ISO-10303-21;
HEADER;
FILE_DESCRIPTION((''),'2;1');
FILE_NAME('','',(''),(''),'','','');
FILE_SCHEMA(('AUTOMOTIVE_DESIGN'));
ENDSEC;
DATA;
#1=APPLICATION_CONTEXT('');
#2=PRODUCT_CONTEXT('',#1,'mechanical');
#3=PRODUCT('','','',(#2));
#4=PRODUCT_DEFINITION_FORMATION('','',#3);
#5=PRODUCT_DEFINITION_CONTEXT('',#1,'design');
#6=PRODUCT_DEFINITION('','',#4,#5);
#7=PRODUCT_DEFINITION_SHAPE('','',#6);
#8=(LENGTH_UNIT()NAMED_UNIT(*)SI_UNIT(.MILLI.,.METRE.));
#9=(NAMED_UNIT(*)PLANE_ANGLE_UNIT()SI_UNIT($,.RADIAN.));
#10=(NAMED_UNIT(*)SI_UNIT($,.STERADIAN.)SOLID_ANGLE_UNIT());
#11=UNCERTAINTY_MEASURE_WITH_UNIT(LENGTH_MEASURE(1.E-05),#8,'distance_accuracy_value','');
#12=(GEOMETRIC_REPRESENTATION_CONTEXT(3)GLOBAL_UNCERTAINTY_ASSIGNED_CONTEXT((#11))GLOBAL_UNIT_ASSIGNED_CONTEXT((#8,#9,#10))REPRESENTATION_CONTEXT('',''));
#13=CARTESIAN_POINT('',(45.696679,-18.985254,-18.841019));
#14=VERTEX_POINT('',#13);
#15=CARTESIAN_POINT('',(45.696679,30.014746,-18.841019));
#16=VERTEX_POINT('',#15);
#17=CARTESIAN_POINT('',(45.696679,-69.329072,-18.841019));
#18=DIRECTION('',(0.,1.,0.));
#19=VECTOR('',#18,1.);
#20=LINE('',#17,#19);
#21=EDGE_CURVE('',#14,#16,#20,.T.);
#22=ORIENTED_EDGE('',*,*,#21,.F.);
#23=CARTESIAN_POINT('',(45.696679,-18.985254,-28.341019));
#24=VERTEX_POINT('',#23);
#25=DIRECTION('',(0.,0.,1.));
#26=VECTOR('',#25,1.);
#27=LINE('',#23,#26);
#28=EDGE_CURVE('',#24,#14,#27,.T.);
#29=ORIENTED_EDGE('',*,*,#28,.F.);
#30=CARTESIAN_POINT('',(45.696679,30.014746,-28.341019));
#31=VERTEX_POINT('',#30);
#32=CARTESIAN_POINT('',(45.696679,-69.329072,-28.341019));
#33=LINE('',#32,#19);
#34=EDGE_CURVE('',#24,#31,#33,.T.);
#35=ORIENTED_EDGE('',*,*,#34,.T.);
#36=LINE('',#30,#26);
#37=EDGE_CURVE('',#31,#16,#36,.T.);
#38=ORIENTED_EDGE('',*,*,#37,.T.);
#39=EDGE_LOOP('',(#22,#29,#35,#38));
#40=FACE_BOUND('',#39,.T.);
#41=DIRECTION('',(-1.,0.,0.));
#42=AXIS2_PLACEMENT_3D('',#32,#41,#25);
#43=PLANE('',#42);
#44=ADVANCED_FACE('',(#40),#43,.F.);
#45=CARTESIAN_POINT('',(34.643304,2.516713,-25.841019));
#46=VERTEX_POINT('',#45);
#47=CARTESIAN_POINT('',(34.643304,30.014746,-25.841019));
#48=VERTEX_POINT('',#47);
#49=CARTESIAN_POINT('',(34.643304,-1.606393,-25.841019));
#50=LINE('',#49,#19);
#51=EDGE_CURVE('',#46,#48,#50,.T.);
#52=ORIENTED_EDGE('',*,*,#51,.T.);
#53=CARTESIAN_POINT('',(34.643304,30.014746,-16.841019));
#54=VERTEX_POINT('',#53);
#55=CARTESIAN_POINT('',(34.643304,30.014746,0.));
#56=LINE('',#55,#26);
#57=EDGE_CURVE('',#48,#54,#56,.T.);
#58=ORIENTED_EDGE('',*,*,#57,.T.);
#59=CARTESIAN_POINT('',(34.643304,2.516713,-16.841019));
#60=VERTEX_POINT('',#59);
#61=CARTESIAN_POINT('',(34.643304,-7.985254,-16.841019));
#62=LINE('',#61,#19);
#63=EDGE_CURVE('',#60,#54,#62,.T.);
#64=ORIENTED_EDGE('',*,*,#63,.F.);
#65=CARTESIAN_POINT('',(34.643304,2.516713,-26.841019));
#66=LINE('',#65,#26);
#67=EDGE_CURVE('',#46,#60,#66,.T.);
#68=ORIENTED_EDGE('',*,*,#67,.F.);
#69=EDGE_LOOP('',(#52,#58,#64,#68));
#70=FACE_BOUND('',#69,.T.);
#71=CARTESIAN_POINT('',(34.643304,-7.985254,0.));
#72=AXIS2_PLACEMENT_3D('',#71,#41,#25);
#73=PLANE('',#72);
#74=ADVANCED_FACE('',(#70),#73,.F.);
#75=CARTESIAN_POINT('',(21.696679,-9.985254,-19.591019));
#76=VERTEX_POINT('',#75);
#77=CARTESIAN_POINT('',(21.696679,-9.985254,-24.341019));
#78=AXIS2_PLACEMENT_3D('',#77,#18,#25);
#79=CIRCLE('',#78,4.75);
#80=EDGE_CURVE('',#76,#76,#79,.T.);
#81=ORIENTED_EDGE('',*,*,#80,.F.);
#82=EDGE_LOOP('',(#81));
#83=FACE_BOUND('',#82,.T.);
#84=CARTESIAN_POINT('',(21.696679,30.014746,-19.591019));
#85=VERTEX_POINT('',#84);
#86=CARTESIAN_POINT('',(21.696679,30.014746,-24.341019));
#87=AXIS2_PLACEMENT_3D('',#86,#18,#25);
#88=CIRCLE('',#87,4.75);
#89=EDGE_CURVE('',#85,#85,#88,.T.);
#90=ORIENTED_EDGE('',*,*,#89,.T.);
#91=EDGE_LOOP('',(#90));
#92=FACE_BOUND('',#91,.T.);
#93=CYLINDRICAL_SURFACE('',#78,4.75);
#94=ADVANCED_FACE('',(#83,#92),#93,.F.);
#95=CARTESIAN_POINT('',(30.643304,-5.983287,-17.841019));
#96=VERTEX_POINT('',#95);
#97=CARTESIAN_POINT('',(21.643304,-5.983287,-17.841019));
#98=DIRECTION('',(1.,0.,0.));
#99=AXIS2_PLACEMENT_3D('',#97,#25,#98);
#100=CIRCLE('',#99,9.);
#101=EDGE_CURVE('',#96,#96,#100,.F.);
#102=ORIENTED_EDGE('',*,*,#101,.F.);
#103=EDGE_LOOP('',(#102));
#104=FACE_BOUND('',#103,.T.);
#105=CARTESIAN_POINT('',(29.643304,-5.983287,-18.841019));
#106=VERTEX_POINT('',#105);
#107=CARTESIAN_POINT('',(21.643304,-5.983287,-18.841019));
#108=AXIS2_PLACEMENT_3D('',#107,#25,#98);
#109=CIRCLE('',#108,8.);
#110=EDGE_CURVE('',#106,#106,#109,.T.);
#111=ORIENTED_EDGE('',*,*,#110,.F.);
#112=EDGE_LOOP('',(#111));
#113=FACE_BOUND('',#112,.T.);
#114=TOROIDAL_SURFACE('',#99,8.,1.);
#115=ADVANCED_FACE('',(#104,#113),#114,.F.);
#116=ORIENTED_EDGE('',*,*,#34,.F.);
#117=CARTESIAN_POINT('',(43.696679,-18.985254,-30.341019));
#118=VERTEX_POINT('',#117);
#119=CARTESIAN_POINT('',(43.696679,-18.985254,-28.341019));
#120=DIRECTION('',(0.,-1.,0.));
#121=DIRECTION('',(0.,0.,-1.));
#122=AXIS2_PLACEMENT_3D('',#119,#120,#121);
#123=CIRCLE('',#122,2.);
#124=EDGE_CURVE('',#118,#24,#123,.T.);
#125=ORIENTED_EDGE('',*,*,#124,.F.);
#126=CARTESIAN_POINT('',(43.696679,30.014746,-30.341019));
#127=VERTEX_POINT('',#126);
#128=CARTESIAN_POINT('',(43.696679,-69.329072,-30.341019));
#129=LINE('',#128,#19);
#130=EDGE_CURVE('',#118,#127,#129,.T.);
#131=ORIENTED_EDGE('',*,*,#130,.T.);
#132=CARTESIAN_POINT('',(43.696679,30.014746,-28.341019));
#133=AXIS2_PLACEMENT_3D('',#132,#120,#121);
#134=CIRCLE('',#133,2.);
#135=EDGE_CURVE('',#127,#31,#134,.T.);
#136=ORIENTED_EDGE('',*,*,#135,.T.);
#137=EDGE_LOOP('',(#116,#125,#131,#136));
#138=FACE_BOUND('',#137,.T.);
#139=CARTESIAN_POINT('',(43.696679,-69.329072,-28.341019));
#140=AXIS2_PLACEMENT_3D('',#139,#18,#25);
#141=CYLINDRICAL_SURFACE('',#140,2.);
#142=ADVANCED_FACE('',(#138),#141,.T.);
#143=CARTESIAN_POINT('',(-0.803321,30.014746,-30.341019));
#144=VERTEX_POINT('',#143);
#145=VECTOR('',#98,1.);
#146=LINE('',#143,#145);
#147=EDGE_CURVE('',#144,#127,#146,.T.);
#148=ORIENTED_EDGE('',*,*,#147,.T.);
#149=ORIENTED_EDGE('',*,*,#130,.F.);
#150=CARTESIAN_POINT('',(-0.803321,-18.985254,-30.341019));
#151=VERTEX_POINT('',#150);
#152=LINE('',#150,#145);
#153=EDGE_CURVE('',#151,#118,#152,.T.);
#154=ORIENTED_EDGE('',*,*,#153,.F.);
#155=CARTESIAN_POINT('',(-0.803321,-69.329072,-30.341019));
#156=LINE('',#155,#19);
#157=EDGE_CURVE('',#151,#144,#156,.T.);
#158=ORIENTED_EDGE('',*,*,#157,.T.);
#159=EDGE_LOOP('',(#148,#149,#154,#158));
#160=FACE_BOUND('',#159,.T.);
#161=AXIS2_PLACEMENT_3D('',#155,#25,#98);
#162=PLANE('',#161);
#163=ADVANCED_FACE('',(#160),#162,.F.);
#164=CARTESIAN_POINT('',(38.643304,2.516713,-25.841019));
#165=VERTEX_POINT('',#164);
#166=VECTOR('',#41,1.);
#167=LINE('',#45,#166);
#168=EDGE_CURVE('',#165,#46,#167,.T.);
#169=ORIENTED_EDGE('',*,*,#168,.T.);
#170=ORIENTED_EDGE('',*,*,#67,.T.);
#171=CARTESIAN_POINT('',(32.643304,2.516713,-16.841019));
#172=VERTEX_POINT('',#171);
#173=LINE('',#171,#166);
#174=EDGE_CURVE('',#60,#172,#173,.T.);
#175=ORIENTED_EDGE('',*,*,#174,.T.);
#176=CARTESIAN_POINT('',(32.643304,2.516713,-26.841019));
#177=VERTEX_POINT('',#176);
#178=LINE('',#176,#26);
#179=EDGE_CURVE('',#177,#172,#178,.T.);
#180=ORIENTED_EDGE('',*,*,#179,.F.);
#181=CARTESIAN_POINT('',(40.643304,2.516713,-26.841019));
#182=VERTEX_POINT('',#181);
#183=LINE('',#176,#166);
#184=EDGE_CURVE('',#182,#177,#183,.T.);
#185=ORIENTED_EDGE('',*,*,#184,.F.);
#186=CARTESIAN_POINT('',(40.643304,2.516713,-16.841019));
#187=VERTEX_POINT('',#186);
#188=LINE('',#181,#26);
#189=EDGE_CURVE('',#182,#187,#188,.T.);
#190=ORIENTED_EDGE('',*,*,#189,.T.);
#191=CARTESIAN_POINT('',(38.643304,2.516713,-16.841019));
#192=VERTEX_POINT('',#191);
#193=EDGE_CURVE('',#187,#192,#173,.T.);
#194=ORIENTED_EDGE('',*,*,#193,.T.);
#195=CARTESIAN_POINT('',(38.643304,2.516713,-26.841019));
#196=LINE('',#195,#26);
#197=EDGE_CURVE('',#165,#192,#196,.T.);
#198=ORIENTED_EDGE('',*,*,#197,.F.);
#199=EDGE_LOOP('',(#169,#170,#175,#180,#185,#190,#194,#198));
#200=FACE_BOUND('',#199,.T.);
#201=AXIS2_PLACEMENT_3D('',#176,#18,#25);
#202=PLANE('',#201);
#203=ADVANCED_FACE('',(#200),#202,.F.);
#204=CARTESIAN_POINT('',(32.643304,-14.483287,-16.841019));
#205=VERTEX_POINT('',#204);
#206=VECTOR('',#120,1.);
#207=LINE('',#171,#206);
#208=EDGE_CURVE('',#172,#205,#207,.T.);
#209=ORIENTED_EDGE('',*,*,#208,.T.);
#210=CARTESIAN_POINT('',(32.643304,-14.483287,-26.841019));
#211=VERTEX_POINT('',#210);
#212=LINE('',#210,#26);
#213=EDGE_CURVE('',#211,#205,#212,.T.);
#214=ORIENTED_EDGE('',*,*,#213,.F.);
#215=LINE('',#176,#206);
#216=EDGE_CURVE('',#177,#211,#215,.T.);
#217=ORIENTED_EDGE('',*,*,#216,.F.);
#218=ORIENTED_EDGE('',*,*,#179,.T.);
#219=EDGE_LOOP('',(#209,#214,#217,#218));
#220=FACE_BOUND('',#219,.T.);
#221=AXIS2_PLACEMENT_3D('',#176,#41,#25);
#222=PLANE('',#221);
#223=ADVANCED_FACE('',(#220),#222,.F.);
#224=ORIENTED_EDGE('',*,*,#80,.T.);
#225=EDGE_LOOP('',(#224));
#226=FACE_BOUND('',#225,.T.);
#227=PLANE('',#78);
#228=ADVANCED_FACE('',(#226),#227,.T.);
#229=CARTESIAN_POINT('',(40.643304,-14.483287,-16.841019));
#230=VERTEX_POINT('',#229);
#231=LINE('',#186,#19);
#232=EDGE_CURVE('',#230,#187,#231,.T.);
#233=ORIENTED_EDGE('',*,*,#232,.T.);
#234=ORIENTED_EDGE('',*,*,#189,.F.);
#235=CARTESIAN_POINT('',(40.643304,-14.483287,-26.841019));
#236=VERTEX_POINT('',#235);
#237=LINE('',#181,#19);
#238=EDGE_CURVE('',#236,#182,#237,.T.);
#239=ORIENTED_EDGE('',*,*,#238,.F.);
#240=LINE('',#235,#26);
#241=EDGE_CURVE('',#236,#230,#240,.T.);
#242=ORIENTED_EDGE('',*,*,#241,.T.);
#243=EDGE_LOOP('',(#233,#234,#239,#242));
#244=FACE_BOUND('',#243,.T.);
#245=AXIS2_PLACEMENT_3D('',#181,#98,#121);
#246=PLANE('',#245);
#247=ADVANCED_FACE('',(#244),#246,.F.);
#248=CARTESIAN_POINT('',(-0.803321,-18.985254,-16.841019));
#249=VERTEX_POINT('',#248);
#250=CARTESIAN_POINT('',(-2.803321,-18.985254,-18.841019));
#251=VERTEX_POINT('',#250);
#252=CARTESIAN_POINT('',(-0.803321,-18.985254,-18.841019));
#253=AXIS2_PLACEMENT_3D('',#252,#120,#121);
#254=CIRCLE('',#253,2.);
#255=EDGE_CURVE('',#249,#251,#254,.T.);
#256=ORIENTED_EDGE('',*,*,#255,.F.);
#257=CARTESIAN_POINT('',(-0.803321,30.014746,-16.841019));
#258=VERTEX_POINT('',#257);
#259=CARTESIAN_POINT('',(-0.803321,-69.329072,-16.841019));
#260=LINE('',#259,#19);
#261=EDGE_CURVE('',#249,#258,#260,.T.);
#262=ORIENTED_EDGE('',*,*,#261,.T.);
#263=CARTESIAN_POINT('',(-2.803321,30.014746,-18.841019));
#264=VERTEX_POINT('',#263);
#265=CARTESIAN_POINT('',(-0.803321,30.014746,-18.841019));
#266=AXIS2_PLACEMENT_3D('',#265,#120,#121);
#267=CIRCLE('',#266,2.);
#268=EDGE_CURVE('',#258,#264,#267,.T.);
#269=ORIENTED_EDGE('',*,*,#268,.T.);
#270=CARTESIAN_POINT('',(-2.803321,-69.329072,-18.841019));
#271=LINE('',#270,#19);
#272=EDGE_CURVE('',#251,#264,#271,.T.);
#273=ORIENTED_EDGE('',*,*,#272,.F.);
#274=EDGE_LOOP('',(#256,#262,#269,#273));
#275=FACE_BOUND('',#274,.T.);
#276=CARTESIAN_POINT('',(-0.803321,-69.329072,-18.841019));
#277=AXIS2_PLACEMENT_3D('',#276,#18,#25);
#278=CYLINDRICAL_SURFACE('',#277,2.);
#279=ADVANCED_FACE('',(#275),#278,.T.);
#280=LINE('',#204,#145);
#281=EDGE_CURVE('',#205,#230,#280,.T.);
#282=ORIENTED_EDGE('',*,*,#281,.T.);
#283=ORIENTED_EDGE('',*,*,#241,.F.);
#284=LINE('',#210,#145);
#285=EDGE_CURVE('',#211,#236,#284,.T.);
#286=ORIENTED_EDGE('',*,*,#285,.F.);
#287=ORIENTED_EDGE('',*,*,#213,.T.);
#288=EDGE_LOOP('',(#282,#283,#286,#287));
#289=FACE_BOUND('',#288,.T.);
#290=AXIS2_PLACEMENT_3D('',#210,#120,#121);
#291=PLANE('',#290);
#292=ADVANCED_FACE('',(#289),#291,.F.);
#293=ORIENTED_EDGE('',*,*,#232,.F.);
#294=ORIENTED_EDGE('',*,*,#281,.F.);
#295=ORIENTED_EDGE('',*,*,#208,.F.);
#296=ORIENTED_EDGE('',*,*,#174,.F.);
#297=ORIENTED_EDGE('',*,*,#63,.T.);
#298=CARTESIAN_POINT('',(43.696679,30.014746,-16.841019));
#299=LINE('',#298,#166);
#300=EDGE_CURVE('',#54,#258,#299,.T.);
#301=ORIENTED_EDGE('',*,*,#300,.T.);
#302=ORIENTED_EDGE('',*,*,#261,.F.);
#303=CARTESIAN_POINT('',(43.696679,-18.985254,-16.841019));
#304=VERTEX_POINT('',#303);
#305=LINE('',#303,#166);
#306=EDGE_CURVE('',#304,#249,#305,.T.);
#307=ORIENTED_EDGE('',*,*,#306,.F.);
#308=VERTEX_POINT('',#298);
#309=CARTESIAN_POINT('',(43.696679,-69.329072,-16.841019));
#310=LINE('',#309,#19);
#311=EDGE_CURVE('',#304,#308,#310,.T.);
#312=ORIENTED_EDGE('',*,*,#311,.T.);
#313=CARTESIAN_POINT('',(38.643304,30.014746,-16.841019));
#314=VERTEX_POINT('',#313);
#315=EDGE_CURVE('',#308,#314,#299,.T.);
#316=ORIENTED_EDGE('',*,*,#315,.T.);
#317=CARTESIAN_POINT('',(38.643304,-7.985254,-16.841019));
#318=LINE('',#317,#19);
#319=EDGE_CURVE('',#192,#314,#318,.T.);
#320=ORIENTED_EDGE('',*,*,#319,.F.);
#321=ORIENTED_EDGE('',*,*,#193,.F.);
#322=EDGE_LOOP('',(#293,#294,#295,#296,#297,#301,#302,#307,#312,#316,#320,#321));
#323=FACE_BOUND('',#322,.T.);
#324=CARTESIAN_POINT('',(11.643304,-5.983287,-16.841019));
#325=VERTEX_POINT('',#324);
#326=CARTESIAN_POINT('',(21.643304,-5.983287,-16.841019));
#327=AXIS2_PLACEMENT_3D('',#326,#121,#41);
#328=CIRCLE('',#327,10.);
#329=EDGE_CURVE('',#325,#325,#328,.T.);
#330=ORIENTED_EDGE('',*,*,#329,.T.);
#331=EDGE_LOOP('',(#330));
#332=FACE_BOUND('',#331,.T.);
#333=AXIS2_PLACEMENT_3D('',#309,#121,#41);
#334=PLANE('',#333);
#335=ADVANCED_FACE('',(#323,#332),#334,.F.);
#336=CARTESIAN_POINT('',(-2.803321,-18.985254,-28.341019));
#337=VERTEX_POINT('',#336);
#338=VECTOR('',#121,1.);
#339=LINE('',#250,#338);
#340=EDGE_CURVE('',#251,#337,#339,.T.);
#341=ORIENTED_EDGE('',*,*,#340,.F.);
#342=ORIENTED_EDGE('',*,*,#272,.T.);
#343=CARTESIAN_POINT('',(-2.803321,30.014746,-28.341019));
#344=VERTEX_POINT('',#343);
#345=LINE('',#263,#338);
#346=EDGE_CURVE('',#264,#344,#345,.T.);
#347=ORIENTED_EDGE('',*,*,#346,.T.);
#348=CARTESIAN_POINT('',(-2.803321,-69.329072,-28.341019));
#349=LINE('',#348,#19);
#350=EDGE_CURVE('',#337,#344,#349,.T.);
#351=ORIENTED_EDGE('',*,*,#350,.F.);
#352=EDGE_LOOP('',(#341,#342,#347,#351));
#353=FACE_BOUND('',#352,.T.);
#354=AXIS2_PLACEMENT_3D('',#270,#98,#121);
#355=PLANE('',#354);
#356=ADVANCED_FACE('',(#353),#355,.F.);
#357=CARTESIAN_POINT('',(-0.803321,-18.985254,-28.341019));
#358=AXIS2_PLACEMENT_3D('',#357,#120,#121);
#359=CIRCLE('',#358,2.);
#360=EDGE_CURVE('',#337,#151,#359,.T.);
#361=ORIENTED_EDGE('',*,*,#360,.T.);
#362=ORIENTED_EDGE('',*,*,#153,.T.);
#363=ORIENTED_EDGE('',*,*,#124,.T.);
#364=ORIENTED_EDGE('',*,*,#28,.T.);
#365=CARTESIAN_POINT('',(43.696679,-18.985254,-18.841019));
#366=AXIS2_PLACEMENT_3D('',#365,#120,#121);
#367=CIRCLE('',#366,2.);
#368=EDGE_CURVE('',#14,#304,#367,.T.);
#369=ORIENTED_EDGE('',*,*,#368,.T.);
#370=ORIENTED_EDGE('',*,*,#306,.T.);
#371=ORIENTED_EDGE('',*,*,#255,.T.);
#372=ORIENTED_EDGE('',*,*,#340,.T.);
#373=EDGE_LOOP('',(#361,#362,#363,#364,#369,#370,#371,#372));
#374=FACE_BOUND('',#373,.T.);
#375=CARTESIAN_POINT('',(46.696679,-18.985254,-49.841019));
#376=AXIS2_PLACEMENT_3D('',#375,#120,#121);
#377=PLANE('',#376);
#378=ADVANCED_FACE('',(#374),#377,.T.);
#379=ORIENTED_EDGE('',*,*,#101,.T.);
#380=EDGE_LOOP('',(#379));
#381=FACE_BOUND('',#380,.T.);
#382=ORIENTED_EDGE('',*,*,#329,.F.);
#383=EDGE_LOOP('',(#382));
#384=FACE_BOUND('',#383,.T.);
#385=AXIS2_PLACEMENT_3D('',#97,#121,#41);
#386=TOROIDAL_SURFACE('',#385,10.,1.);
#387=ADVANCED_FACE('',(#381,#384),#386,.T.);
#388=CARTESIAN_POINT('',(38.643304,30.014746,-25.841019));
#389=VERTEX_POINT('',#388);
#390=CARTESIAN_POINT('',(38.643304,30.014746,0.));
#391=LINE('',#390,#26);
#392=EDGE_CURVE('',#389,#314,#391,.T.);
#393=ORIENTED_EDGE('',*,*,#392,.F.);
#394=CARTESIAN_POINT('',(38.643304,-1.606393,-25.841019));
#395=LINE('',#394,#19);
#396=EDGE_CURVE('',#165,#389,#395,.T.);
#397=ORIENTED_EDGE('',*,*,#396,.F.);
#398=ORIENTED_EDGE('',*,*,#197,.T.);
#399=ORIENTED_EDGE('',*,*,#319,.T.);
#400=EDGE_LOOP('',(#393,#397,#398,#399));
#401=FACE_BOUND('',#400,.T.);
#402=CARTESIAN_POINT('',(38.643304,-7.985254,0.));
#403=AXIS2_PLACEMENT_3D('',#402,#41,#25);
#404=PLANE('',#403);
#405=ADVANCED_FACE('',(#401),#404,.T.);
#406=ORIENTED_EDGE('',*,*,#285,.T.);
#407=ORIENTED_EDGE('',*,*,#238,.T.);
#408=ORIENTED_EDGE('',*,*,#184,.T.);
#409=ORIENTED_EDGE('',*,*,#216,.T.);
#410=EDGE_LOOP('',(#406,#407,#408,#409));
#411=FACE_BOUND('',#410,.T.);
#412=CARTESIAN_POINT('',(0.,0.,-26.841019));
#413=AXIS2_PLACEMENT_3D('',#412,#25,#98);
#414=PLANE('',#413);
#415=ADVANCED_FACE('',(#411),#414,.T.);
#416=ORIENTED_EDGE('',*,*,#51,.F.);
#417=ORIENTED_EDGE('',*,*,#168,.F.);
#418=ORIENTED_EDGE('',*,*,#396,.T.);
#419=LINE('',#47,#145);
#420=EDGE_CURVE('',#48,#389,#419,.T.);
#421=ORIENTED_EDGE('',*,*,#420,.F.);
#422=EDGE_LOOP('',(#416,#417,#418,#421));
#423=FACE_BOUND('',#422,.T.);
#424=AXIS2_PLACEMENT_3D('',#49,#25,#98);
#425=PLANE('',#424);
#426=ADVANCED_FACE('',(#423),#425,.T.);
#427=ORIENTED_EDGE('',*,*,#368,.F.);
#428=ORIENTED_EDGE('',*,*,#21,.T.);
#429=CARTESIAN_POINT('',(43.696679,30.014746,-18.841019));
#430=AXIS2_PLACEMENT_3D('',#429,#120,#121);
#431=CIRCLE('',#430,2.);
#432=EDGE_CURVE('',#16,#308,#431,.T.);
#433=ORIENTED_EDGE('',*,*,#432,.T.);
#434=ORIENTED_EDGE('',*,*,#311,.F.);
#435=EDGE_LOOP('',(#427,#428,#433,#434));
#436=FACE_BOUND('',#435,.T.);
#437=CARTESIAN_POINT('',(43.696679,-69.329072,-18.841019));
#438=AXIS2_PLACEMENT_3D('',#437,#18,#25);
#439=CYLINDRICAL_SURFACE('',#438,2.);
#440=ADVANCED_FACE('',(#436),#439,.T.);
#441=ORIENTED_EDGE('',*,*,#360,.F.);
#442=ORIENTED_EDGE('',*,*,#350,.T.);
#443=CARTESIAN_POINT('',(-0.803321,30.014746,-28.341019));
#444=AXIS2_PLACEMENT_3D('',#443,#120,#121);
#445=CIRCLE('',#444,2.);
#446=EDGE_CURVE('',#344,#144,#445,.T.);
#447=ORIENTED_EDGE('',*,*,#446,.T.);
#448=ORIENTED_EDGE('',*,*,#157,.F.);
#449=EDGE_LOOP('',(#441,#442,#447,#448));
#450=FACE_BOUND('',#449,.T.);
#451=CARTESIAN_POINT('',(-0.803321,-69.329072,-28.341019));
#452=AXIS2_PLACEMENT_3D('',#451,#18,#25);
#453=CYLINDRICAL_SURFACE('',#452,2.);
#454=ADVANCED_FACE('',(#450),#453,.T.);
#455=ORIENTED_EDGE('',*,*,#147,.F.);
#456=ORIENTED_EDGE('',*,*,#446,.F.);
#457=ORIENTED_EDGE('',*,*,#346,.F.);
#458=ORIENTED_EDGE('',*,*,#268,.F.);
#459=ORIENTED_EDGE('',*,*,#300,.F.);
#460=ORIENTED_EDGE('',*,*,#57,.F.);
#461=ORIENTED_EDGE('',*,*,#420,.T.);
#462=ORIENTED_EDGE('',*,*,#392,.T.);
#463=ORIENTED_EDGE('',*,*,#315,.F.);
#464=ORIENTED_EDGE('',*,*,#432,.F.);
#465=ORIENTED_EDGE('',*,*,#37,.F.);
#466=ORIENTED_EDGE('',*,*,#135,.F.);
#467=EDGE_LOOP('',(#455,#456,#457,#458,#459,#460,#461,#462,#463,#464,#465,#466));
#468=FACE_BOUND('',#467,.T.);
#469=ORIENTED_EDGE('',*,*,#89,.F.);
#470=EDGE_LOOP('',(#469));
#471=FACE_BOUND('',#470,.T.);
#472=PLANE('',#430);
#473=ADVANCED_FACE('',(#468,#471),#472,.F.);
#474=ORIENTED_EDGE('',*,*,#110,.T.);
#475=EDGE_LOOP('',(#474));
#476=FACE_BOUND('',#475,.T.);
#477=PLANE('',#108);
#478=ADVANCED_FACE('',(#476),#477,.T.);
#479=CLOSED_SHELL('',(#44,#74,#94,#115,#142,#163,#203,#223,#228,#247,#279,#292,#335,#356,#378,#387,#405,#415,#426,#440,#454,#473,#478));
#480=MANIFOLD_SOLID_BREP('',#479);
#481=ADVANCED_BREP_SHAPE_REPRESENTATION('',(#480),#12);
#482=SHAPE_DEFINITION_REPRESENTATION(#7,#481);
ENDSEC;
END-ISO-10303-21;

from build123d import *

# Parameters (mm, degrees)
EXTRUDE_1_DEPTH     = 49
SKETCH_2_W          = 8
SKETCH_2_H          = 17
CUT_EXTRUDE_1_DEPTH = 10
SKETCH_3_R          = 9
CUT_EXTRUDE_2_DEPTH = 2
FILLET_1_R          = 1
SKETCH_4_R          = 4.75
CUT_EXTRUDE_4_DEPTH = 40
SKETCH_5_W          = 4
SKETCH_5_H          = 10
CUT_EXTRUDE_5_DEPTH = 38
SKETCH_6_W          = 4
SKETCH_6_H          = 1
EXTRUDE_2_DEPTH     = 27.498032825


with BuildPart() as part:
    # 草图1 → 凸台-拉伸1 (new body)
    with BuildSketch(Plane.XZ.offset(-30.01474584)):
        with BuildLine():
            Line((43.696678655, -16.841019134), (-0.803321345, -16.841019134))
            ThreePointArc((-0.803321345, -16.841019134), (-2.217534907, -17.426805571), (-2.803321345, -18.841019134))
            Line((-2.803321345, -18.841019134), (-2.803321345, -28.341019134))
            ThreePointArc((-2.803321345, -28.341019134), (-2.217534907, -29.755232696), (-0.803321345, -30.341019134))
            Line((-0.803321345, -30.341019134), (43.696678655, -30.341019134))
            ThreePointArc((43.696678655, -30.341019134), (45.110892218, -29.755232696), (45.696678655, -28.341019134))
            Line((45.696678655, -28.341019134), (45.696678655, -18.841019134))
            ThreePointArc((45.696678655, -18.841019134), (45.110892218, -17.426805571), (43.696678655, -16.841019134))
        make_face()
    extrude(amount=EXTRUDE_1_DEPTH)

    # 草图2 → 切除-拉伸1 (cut)
    with BuildSketch(Plane.XY.offset(-16.841019134)):
        with Locations((36.643304361, -5.983286986)):
            Rectangle(SKETCH_2_W, SKETCH_2_H)
    extrude(amount=-CUT_EXTRUDE_1_DEPTH, mode=Mode.SUBTRACT)

    # 草图3 → 切除-拉伸2 (cut)
    with BuildSketch(Plane.XY.offset(-16.841019134)):
        with Locations((21.643304361, -5.983286986)):
            Circle(SKETCH_3_R)
    extrude(amount=-CUT_EXTRUDE_2_DEPTH, mode=Mode.SUBTRACT)

    # 圆角1
    fillet_1_edges = [part.edges().sort_by_distance(p)[0] for p in [
        (12.643304361, -5.983286986, -18.841019134),
        (12.643304361, -5.983286986, -16.841019134),
    ]]
    fillet(fillet_1_edges, radius=FILLET_1_R - 0.0001)  # a hair under: the kernel refuses the full size

    # 草图4 → 切除-拉伸4 (cut)
    with BuildSketch(Plane(origin=(0, 30.01474584, 0), x_dir=(1, 0, 0), z_dir=(0, 1, 0))):
        with Locations(Location((21.696678655, 24.341019134, 0), (0, 0, 270))):
            Circle(SKETCH_4_R)
    extrude(amount=-CUT_EXTRUDE_4_DEPTH, mode=Mode.SUBTRACT)

    # 草图5 → 切除-拉伸5 (cut)
    with BuildSketch(Plane(origin=(0, 30.01474584, 0), x_dir=(1, 0, 0), z_dir=(0, 1, 0))):
        with Locations((36.643304361, 21.841019134)):
            Rectangle(SKETCH_5_W, SKETCH_5_H)
    extrude(amount=-CUT_EXTRUDE_5_DEPTH, mode=Mode.SUBTRACT)

    # 草图6 → 凸台-拉伸2 (add)
    with BuildSketch(Plane(origin=(0, 30.01474584, 0), x_dir=(1, 0, 0), z_dir=(0, 1, 0))):
        with Locations((36.643304361, 26.341019134)):
            Rectangle(SKETCH_6_W, SKETCH_6_H)
    extrude(amount=-EXTRUDE_2_DEPTH)


solid = part.part
